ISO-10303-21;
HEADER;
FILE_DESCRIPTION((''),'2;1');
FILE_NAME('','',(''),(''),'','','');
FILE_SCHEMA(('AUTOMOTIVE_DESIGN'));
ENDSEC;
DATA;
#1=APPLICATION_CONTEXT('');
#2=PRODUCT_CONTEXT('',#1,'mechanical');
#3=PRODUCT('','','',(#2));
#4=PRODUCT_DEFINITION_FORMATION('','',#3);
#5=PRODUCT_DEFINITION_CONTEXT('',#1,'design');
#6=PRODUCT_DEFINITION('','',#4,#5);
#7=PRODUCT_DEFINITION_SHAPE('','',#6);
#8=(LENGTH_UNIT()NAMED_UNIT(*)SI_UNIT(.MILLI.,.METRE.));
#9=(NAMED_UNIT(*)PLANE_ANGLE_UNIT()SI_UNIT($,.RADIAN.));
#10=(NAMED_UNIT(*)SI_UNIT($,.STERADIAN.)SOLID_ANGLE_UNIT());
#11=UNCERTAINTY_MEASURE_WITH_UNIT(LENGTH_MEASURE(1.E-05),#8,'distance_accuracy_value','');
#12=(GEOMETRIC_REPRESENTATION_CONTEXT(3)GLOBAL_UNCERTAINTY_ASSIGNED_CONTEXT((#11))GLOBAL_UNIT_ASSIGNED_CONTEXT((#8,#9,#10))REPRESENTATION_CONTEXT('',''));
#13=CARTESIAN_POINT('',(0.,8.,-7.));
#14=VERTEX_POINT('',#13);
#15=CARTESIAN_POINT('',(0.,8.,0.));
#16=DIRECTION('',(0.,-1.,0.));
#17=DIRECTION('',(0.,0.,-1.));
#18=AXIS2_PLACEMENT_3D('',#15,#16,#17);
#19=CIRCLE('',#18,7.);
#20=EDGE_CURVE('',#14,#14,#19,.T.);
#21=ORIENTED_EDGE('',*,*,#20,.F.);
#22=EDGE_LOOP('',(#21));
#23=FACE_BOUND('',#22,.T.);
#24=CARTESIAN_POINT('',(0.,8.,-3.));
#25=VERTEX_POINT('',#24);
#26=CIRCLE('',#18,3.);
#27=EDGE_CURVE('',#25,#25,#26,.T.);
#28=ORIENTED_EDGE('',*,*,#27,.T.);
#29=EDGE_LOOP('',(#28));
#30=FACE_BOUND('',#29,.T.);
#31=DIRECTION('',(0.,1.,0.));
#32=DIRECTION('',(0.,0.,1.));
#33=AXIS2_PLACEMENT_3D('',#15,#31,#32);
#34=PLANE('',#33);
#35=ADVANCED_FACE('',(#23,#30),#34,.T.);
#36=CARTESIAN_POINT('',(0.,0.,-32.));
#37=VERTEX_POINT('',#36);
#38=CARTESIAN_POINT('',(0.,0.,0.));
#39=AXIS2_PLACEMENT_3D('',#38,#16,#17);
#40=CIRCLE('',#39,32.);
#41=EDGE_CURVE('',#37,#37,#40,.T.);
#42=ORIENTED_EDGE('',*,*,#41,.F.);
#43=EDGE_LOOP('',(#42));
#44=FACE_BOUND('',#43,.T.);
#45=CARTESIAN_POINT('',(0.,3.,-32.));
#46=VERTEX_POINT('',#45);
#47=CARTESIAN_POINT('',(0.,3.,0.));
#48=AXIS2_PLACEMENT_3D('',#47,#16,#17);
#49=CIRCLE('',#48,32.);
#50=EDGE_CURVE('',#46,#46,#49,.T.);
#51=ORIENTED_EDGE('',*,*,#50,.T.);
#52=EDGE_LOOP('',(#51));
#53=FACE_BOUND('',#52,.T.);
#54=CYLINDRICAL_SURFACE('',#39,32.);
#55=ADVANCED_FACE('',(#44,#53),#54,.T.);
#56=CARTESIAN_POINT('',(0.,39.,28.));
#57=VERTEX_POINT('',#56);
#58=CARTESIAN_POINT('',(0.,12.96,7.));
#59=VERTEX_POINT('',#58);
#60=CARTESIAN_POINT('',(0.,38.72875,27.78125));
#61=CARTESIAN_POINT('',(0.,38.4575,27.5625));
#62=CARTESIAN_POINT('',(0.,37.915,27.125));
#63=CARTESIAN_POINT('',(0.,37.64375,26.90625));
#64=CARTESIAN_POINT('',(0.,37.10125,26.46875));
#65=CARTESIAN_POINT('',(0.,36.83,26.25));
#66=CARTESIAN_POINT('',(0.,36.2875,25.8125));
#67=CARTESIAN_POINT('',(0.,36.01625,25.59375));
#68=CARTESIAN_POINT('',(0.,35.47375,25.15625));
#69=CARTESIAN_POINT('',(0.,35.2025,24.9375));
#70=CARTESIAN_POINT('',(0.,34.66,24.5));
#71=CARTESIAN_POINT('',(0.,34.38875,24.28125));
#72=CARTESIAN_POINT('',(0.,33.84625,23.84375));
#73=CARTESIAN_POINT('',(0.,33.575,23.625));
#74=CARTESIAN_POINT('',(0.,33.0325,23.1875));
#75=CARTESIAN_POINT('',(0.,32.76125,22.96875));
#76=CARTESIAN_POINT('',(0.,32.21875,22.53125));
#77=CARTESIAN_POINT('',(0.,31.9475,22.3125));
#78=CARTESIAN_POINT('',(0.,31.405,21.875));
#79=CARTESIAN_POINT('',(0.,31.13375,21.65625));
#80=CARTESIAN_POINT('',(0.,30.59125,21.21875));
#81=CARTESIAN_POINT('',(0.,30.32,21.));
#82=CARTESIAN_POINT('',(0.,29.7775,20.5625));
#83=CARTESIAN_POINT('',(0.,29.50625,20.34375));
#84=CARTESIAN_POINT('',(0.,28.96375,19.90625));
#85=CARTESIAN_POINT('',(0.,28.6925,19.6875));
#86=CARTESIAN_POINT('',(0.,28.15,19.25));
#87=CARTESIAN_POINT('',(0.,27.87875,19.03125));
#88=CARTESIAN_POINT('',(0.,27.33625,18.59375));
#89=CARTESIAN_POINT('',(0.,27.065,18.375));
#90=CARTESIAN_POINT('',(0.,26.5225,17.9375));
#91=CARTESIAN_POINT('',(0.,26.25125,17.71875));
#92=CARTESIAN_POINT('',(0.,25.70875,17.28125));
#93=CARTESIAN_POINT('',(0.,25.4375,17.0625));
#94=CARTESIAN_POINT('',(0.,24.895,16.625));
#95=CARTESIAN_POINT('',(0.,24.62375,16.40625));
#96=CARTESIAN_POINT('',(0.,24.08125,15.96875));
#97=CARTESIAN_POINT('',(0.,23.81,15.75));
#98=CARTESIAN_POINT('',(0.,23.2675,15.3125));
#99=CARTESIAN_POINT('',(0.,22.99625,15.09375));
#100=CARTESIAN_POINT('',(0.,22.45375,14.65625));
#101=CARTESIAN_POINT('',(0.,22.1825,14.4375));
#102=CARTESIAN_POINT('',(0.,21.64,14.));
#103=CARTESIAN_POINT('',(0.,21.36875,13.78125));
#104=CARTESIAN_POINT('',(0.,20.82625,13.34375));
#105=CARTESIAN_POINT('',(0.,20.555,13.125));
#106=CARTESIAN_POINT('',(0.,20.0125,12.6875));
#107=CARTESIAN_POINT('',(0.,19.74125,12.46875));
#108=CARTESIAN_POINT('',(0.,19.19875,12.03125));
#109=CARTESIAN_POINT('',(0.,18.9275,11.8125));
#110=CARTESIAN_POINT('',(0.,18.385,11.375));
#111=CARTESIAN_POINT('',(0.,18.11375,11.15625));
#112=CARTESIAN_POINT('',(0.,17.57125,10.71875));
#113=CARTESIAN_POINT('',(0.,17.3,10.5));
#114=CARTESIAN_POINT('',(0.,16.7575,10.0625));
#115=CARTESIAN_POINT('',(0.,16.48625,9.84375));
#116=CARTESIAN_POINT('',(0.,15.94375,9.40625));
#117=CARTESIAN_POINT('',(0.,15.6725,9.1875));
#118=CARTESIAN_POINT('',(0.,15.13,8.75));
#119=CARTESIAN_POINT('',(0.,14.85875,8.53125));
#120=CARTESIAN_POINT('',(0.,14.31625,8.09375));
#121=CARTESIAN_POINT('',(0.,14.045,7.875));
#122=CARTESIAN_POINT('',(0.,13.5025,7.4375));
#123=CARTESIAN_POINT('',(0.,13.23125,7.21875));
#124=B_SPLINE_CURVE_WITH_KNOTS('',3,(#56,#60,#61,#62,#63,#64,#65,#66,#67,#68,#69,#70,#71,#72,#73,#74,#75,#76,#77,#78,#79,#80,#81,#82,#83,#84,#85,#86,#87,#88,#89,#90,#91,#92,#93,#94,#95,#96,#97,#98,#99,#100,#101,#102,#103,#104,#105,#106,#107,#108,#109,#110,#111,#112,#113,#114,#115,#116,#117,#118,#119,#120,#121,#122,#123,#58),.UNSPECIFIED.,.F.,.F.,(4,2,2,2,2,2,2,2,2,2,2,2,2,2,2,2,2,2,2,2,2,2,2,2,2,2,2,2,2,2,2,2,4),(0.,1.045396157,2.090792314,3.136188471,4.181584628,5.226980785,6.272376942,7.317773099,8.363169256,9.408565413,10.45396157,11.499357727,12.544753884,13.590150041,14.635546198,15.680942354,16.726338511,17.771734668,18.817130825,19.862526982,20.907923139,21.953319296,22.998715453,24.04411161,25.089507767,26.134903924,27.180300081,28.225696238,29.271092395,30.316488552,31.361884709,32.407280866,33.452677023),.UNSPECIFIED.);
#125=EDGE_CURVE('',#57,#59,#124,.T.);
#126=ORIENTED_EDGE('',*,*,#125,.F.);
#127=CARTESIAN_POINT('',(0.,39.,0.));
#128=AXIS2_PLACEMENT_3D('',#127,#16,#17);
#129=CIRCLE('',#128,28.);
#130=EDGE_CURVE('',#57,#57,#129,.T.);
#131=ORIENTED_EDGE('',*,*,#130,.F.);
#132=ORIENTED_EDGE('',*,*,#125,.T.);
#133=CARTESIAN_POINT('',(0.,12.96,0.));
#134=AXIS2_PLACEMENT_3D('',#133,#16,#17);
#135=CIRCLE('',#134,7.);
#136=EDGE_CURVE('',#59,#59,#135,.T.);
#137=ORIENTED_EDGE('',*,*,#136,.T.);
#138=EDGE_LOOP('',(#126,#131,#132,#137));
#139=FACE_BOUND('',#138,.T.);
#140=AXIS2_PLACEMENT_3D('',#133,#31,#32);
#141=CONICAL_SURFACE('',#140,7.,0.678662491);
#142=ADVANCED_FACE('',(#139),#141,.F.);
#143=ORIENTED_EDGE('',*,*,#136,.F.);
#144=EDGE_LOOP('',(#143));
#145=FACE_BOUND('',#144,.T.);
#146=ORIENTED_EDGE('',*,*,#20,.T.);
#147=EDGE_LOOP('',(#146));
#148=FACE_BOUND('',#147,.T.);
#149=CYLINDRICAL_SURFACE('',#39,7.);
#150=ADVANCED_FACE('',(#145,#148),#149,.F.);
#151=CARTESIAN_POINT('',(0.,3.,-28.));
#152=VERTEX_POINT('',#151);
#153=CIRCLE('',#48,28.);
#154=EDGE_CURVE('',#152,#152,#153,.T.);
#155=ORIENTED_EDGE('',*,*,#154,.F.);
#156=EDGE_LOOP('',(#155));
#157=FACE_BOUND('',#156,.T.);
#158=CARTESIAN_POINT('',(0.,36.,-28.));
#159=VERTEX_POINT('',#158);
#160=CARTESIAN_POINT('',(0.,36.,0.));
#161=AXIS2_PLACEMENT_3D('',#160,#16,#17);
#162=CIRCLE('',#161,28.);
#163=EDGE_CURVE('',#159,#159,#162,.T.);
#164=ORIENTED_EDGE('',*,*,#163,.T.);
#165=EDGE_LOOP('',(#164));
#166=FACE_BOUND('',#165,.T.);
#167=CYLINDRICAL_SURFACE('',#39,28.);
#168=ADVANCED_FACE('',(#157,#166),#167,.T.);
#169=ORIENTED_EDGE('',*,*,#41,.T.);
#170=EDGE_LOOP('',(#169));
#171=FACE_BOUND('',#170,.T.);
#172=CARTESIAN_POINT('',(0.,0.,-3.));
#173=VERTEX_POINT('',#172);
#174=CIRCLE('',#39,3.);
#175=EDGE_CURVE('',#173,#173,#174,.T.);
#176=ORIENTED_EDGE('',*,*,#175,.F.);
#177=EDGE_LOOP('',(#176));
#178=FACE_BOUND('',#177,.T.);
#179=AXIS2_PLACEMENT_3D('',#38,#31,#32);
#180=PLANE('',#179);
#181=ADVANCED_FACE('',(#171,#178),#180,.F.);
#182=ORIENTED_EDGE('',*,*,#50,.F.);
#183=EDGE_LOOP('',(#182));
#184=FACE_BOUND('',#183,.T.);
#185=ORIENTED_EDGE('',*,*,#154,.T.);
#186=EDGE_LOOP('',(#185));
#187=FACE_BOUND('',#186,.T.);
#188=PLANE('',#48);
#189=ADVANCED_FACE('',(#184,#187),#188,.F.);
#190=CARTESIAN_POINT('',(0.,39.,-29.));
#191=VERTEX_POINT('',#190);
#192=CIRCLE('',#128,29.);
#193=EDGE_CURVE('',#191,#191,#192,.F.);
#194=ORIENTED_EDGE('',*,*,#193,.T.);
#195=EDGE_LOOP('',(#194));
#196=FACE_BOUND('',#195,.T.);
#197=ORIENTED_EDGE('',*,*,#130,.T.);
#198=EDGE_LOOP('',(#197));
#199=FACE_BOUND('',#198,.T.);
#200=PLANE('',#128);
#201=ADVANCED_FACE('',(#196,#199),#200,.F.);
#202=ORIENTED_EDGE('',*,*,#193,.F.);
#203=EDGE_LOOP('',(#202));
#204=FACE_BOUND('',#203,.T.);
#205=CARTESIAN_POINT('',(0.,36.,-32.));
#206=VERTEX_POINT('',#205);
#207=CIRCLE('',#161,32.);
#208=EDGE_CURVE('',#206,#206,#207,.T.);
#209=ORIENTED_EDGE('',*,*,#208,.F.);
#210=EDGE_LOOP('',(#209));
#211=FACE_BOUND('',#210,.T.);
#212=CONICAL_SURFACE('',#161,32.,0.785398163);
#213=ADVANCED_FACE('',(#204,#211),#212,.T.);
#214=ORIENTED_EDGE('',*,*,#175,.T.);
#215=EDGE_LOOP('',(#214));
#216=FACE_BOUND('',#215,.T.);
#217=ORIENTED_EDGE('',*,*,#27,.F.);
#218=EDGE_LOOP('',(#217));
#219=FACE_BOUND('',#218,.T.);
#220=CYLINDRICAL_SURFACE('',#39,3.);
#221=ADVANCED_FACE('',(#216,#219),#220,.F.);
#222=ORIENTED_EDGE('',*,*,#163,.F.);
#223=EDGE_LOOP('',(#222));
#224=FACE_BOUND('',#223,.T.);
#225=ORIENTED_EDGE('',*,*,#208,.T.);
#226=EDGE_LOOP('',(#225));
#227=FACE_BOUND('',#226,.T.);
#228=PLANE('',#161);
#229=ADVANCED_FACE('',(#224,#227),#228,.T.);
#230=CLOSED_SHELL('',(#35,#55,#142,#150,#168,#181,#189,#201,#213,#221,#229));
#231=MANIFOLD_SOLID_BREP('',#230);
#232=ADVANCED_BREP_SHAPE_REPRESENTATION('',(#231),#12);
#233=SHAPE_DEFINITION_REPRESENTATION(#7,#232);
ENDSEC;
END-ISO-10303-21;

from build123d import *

# Parameters (mm, degrees)
SKETCH2_W     = 4
SKETCH2_H     = 3
CHAMFER1_SIZE = 3


with BuildPart() as part:
    # Sketch2 → Revolve1 (revolve)
    with BuildSketch(Plane.XY, mode=Mode.PRIVATE) as revolve1_sk:
        Polygon((-28, 0), (-3, 0), (-3, 8), (-7, 8), (-7, 12.96), (-28, 39), (-28, 36), (-28, 3), align=None)
        with Locations((-30, 1.5)):
            Rectangle(SKETCH2_W, SKETCH2_H)
        with Locations((-30, 37.5)):
            Rectangle(SKETCH2_W, SKETCH2_H)
    revolve(revolve1_sk.sketch.rotate(Axis((0, 0, 0), (0, 1, 0)), 270), axis=Axis((0, 0, 0), (0, 1, 0)))

    # Chamfer1
    chamfer1_edges = [part.edges().sort_by_distance(p)[0] for p in [
        (0, 39, 32),
    ]]
    chamfer(chamfer1_edges, length=CHAMFER1_SIZE - 0.0001)  # a hair under: the kernel refuses the full size


solid = part.part
